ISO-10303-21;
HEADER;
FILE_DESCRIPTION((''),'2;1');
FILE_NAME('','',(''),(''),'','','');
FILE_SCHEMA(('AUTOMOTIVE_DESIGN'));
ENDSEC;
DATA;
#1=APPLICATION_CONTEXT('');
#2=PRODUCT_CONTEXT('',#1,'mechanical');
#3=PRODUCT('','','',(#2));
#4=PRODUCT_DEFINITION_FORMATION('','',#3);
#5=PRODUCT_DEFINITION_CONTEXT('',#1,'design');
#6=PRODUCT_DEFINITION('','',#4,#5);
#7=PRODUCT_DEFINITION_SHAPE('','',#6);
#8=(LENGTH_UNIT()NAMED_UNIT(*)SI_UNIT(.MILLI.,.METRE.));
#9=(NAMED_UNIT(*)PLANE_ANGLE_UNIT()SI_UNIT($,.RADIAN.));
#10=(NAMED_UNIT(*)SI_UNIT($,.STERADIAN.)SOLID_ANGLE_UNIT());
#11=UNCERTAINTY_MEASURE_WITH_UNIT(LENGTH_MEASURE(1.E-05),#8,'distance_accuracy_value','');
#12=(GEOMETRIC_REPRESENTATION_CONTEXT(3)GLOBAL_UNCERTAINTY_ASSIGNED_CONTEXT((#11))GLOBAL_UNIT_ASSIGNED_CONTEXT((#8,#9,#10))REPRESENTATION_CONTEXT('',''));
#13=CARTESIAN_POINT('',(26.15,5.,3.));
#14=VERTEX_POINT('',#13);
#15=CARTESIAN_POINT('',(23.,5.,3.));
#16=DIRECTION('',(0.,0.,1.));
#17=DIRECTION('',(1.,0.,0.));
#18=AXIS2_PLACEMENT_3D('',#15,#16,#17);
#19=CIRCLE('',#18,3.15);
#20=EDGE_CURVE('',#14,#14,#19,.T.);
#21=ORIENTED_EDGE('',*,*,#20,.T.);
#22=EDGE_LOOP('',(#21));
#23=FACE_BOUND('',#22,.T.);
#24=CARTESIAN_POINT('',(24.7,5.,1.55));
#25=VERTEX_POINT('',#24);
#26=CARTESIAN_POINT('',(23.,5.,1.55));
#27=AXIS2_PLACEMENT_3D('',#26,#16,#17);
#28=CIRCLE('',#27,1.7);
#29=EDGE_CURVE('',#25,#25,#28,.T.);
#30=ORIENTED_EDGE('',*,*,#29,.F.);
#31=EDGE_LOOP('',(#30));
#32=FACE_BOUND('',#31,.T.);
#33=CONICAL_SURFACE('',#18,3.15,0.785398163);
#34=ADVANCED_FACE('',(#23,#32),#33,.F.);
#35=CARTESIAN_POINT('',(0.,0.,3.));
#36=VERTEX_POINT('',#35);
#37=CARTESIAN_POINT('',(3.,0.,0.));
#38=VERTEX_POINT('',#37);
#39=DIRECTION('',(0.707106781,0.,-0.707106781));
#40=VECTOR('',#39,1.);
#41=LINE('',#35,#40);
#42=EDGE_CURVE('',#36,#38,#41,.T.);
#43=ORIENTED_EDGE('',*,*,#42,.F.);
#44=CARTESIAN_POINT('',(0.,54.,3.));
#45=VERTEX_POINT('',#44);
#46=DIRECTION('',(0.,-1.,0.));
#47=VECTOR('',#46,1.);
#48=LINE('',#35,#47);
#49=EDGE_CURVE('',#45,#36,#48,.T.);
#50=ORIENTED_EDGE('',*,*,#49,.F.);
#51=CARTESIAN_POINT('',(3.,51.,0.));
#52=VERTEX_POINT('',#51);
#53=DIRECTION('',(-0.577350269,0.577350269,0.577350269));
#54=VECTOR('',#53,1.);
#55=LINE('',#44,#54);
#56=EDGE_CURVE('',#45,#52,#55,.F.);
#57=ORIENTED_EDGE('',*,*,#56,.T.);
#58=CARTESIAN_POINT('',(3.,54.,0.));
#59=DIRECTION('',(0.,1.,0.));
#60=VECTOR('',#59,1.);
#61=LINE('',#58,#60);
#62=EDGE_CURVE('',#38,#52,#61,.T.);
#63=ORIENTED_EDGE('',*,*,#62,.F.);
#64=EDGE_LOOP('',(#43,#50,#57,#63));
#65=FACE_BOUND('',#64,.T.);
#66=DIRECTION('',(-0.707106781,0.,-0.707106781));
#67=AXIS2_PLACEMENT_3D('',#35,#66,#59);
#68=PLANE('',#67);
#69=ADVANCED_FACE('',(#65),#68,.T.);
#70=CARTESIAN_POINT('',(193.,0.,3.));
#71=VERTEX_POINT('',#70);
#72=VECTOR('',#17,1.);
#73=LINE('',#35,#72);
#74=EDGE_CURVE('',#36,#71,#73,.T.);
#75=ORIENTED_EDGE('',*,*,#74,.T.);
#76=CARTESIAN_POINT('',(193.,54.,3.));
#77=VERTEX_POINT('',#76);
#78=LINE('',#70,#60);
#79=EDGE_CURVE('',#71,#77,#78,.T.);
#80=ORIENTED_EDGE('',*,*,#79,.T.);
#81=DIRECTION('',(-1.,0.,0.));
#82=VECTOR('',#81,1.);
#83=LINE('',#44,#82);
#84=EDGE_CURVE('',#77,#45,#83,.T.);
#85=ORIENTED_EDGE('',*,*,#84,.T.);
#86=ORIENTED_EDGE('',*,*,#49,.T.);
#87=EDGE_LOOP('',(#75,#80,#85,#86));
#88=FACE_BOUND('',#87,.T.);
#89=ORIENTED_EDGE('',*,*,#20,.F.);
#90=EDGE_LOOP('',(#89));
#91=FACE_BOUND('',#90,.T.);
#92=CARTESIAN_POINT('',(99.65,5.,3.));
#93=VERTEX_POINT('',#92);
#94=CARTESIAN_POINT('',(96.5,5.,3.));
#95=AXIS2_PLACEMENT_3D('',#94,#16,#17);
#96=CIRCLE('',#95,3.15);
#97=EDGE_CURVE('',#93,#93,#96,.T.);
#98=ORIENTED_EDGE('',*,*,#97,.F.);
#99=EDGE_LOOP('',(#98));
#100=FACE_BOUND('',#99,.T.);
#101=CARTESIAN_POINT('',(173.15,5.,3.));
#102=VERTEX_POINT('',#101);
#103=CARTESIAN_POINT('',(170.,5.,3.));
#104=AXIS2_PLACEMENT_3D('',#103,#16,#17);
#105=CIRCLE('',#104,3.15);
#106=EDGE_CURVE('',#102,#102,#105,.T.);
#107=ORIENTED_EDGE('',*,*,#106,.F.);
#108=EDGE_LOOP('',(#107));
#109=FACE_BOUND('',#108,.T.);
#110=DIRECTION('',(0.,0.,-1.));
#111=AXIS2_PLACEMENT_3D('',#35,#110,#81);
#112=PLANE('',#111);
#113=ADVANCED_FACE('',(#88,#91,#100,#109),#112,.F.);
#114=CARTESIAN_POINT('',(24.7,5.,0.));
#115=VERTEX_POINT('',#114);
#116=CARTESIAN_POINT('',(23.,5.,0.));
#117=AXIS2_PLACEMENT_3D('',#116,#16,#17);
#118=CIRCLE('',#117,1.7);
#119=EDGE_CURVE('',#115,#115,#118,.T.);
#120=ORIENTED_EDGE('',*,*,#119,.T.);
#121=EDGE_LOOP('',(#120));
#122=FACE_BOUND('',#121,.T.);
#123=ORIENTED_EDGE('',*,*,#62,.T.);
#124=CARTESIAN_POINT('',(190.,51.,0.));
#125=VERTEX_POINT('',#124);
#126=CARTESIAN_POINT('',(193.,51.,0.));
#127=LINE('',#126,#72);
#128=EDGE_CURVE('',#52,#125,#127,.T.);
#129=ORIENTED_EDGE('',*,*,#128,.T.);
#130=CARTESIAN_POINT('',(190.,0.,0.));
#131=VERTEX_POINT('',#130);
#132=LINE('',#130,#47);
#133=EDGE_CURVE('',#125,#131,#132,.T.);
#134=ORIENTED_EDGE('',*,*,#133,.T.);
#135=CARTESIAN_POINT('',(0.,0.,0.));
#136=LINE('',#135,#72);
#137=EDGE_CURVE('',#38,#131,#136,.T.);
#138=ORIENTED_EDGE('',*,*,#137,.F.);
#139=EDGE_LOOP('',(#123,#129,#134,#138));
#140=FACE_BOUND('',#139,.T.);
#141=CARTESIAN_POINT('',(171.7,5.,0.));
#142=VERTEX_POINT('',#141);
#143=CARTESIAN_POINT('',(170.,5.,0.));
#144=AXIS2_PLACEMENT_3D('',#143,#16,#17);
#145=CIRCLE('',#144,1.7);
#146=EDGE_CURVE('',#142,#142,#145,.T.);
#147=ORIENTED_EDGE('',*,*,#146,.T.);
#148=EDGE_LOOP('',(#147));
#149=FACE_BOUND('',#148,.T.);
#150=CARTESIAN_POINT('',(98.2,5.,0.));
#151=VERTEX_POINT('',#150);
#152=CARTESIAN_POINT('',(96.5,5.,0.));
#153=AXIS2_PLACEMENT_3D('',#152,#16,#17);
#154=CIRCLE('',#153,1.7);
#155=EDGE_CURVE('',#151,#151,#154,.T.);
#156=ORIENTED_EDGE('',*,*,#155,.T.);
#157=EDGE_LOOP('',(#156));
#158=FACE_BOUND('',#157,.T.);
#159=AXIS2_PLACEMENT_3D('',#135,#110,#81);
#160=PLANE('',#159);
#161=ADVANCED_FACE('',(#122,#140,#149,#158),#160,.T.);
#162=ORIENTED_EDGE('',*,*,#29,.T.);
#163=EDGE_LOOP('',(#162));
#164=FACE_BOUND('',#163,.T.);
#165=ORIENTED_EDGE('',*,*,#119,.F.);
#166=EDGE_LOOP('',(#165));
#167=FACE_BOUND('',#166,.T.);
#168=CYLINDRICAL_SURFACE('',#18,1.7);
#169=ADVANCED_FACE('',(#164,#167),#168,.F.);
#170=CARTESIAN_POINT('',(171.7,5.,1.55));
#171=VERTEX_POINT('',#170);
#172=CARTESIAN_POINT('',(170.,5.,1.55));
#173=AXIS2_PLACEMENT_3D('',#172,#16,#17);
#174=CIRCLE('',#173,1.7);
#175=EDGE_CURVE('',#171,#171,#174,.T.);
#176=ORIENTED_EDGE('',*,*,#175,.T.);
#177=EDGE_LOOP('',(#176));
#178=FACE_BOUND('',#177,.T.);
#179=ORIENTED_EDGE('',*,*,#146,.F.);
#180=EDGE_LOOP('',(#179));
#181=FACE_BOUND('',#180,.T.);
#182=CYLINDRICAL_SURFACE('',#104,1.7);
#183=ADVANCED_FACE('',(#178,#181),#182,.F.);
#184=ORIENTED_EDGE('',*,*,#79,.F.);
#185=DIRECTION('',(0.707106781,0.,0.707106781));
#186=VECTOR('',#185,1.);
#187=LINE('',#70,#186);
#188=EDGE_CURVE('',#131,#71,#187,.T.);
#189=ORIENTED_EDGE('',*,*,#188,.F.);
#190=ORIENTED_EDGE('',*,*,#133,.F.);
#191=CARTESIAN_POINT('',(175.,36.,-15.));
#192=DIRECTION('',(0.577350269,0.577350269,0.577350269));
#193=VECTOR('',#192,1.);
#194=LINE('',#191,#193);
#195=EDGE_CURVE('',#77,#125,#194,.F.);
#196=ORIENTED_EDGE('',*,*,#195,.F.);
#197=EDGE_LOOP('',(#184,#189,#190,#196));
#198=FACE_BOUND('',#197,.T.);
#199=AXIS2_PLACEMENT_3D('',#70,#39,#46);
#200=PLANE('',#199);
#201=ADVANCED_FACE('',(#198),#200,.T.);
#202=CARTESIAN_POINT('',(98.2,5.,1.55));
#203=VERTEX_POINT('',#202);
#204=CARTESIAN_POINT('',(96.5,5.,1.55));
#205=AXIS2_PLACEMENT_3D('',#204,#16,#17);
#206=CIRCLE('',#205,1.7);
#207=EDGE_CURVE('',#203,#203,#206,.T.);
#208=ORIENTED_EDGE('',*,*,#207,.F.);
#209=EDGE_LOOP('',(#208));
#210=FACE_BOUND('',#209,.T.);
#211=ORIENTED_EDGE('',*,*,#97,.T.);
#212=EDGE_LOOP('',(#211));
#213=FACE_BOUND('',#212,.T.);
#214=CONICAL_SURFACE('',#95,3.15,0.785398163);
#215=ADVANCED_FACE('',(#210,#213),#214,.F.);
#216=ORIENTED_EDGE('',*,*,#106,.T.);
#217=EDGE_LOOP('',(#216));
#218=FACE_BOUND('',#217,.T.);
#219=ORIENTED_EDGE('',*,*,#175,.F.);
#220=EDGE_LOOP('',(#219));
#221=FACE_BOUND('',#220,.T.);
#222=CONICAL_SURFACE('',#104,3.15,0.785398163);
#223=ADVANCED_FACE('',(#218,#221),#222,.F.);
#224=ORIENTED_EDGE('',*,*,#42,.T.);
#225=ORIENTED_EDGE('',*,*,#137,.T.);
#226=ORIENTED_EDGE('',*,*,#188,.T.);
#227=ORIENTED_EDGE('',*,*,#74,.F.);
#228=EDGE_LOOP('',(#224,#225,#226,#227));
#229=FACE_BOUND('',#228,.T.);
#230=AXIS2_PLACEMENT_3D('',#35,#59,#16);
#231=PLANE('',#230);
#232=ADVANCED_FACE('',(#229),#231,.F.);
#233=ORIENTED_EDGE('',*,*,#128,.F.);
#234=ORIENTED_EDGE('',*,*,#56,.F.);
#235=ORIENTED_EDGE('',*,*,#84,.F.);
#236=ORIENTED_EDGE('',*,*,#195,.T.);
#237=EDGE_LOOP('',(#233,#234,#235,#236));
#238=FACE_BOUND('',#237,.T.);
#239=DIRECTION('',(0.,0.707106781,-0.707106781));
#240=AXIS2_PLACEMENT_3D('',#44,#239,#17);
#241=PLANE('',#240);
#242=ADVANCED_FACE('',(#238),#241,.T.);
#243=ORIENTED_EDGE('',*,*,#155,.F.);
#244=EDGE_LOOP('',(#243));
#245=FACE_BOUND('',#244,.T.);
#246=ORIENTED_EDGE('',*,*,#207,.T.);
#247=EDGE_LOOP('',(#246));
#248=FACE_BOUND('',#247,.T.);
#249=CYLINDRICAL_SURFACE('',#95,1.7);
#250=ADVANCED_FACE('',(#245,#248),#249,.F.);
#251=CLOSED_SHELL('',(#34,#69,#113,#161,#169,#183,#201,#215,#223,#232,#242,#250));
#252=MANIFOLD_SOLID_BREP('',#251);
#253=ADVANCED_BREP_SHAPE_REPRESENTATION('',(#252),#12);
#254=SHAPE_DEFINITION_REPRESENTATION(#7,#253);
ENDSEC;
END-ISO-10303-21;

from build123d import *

# Parameters (mm, degrees)
SKETCH1_W                                      = 193
SKETCH1_H                                      = 54
BOSS_EXTRUDE1_DEPTH                            = 3
CHAMFER1_SIZE                                  = 3
CSK_FOR_M3_FLAT_HEAD_MACHINE_SCREW1_AT_2_COUNT = 2
CSK_FOR_M3_FLAT_HEAD_MACHINE_SCREW1_AT_2_PITCH = 73.5
CSK_FOR_M3_FLAT_HEAD_MACHINE_SCREW1_AT_3_COUNT = 2
CSK_FOR_M3_FLAT_HEAD_MACHINE_SCREW1_AT_3_PITCH = 147


with BuildPart() as part:
    # Sketch1 → Boss-Extrude1 (new body)
    with BuildSketch(Plane.XY):
        with Locations((96.5, 27)):
            Rectangle(SKETCH1_W, SKETCH1_H)
    extrude(amount=BOSS_EXTRUDE1_DEPTH)

    # Chamfer1
    chamfer1_edges = [part.edges().sort_by_distance(p)[0] for p in [
        (0, 27, 0),
        (96.5, 54, 0),
        (193, 27, 0),
    ]]
    chamfer(chamfer1_edges, length=CHAMFER1_SIZE - 0.0001)  # a hair under: the kernel refuses the full size

    # Sketch3 → CSK for M3 Flat Head Machine Screw1 (revolve, cut)
    with BuildSketch(Plane(origin=(23, 5, 3), x_dir=(0, -1, 0), z_dir=(1, 0, 0))):
        Polygon((0, 0), (0, 3), (1.7, 3), (1.7, 1.45), (3.15, 0), align=None)
    csk_for_m3_flat_head_machine_screw1 = revolve(axis=Axis((23, 5, 9.35), (0, 0, -1)), mode=Mode.SUBTRACT)

    # CSK for M3 Flat Head Machine Screw1 at 2: CSK for M3 Flat Head Machine Screw1 ×2
    with Locations(*[(i * CSK_FOR_M3_FLAT_HEAD_MACHINE_SCREW1_AT_2_PITCH, 0, 0) for i in range(1, CSK_FOR_M3_FLAT_HEAD_MACHINE_SCREW1_AT_2_COUNT)]):
        add(csk_for_m3_flat_head_machine_screw1, mode=Mode.SUBTRACT)

    # CSK for M3 Flat Head Machine Screw1 at 3: CSK for M3 Flat Head Machine Screw1 ×2
    with Locations(*[(i * CSK_FOR_M3_FLAT_HEAD_MACHINE_SCREW1_AT_3_PITCH, 0, 0) for i in range(1, CSK_FOR_M3_FLAT_HEAD_MACHINE_SCREW1_AT_3_COUNT)]):
        add(csk_for_m3_flat_head_machine_screw1, mode=Mode.SUBTRACT)


solid = part.part
